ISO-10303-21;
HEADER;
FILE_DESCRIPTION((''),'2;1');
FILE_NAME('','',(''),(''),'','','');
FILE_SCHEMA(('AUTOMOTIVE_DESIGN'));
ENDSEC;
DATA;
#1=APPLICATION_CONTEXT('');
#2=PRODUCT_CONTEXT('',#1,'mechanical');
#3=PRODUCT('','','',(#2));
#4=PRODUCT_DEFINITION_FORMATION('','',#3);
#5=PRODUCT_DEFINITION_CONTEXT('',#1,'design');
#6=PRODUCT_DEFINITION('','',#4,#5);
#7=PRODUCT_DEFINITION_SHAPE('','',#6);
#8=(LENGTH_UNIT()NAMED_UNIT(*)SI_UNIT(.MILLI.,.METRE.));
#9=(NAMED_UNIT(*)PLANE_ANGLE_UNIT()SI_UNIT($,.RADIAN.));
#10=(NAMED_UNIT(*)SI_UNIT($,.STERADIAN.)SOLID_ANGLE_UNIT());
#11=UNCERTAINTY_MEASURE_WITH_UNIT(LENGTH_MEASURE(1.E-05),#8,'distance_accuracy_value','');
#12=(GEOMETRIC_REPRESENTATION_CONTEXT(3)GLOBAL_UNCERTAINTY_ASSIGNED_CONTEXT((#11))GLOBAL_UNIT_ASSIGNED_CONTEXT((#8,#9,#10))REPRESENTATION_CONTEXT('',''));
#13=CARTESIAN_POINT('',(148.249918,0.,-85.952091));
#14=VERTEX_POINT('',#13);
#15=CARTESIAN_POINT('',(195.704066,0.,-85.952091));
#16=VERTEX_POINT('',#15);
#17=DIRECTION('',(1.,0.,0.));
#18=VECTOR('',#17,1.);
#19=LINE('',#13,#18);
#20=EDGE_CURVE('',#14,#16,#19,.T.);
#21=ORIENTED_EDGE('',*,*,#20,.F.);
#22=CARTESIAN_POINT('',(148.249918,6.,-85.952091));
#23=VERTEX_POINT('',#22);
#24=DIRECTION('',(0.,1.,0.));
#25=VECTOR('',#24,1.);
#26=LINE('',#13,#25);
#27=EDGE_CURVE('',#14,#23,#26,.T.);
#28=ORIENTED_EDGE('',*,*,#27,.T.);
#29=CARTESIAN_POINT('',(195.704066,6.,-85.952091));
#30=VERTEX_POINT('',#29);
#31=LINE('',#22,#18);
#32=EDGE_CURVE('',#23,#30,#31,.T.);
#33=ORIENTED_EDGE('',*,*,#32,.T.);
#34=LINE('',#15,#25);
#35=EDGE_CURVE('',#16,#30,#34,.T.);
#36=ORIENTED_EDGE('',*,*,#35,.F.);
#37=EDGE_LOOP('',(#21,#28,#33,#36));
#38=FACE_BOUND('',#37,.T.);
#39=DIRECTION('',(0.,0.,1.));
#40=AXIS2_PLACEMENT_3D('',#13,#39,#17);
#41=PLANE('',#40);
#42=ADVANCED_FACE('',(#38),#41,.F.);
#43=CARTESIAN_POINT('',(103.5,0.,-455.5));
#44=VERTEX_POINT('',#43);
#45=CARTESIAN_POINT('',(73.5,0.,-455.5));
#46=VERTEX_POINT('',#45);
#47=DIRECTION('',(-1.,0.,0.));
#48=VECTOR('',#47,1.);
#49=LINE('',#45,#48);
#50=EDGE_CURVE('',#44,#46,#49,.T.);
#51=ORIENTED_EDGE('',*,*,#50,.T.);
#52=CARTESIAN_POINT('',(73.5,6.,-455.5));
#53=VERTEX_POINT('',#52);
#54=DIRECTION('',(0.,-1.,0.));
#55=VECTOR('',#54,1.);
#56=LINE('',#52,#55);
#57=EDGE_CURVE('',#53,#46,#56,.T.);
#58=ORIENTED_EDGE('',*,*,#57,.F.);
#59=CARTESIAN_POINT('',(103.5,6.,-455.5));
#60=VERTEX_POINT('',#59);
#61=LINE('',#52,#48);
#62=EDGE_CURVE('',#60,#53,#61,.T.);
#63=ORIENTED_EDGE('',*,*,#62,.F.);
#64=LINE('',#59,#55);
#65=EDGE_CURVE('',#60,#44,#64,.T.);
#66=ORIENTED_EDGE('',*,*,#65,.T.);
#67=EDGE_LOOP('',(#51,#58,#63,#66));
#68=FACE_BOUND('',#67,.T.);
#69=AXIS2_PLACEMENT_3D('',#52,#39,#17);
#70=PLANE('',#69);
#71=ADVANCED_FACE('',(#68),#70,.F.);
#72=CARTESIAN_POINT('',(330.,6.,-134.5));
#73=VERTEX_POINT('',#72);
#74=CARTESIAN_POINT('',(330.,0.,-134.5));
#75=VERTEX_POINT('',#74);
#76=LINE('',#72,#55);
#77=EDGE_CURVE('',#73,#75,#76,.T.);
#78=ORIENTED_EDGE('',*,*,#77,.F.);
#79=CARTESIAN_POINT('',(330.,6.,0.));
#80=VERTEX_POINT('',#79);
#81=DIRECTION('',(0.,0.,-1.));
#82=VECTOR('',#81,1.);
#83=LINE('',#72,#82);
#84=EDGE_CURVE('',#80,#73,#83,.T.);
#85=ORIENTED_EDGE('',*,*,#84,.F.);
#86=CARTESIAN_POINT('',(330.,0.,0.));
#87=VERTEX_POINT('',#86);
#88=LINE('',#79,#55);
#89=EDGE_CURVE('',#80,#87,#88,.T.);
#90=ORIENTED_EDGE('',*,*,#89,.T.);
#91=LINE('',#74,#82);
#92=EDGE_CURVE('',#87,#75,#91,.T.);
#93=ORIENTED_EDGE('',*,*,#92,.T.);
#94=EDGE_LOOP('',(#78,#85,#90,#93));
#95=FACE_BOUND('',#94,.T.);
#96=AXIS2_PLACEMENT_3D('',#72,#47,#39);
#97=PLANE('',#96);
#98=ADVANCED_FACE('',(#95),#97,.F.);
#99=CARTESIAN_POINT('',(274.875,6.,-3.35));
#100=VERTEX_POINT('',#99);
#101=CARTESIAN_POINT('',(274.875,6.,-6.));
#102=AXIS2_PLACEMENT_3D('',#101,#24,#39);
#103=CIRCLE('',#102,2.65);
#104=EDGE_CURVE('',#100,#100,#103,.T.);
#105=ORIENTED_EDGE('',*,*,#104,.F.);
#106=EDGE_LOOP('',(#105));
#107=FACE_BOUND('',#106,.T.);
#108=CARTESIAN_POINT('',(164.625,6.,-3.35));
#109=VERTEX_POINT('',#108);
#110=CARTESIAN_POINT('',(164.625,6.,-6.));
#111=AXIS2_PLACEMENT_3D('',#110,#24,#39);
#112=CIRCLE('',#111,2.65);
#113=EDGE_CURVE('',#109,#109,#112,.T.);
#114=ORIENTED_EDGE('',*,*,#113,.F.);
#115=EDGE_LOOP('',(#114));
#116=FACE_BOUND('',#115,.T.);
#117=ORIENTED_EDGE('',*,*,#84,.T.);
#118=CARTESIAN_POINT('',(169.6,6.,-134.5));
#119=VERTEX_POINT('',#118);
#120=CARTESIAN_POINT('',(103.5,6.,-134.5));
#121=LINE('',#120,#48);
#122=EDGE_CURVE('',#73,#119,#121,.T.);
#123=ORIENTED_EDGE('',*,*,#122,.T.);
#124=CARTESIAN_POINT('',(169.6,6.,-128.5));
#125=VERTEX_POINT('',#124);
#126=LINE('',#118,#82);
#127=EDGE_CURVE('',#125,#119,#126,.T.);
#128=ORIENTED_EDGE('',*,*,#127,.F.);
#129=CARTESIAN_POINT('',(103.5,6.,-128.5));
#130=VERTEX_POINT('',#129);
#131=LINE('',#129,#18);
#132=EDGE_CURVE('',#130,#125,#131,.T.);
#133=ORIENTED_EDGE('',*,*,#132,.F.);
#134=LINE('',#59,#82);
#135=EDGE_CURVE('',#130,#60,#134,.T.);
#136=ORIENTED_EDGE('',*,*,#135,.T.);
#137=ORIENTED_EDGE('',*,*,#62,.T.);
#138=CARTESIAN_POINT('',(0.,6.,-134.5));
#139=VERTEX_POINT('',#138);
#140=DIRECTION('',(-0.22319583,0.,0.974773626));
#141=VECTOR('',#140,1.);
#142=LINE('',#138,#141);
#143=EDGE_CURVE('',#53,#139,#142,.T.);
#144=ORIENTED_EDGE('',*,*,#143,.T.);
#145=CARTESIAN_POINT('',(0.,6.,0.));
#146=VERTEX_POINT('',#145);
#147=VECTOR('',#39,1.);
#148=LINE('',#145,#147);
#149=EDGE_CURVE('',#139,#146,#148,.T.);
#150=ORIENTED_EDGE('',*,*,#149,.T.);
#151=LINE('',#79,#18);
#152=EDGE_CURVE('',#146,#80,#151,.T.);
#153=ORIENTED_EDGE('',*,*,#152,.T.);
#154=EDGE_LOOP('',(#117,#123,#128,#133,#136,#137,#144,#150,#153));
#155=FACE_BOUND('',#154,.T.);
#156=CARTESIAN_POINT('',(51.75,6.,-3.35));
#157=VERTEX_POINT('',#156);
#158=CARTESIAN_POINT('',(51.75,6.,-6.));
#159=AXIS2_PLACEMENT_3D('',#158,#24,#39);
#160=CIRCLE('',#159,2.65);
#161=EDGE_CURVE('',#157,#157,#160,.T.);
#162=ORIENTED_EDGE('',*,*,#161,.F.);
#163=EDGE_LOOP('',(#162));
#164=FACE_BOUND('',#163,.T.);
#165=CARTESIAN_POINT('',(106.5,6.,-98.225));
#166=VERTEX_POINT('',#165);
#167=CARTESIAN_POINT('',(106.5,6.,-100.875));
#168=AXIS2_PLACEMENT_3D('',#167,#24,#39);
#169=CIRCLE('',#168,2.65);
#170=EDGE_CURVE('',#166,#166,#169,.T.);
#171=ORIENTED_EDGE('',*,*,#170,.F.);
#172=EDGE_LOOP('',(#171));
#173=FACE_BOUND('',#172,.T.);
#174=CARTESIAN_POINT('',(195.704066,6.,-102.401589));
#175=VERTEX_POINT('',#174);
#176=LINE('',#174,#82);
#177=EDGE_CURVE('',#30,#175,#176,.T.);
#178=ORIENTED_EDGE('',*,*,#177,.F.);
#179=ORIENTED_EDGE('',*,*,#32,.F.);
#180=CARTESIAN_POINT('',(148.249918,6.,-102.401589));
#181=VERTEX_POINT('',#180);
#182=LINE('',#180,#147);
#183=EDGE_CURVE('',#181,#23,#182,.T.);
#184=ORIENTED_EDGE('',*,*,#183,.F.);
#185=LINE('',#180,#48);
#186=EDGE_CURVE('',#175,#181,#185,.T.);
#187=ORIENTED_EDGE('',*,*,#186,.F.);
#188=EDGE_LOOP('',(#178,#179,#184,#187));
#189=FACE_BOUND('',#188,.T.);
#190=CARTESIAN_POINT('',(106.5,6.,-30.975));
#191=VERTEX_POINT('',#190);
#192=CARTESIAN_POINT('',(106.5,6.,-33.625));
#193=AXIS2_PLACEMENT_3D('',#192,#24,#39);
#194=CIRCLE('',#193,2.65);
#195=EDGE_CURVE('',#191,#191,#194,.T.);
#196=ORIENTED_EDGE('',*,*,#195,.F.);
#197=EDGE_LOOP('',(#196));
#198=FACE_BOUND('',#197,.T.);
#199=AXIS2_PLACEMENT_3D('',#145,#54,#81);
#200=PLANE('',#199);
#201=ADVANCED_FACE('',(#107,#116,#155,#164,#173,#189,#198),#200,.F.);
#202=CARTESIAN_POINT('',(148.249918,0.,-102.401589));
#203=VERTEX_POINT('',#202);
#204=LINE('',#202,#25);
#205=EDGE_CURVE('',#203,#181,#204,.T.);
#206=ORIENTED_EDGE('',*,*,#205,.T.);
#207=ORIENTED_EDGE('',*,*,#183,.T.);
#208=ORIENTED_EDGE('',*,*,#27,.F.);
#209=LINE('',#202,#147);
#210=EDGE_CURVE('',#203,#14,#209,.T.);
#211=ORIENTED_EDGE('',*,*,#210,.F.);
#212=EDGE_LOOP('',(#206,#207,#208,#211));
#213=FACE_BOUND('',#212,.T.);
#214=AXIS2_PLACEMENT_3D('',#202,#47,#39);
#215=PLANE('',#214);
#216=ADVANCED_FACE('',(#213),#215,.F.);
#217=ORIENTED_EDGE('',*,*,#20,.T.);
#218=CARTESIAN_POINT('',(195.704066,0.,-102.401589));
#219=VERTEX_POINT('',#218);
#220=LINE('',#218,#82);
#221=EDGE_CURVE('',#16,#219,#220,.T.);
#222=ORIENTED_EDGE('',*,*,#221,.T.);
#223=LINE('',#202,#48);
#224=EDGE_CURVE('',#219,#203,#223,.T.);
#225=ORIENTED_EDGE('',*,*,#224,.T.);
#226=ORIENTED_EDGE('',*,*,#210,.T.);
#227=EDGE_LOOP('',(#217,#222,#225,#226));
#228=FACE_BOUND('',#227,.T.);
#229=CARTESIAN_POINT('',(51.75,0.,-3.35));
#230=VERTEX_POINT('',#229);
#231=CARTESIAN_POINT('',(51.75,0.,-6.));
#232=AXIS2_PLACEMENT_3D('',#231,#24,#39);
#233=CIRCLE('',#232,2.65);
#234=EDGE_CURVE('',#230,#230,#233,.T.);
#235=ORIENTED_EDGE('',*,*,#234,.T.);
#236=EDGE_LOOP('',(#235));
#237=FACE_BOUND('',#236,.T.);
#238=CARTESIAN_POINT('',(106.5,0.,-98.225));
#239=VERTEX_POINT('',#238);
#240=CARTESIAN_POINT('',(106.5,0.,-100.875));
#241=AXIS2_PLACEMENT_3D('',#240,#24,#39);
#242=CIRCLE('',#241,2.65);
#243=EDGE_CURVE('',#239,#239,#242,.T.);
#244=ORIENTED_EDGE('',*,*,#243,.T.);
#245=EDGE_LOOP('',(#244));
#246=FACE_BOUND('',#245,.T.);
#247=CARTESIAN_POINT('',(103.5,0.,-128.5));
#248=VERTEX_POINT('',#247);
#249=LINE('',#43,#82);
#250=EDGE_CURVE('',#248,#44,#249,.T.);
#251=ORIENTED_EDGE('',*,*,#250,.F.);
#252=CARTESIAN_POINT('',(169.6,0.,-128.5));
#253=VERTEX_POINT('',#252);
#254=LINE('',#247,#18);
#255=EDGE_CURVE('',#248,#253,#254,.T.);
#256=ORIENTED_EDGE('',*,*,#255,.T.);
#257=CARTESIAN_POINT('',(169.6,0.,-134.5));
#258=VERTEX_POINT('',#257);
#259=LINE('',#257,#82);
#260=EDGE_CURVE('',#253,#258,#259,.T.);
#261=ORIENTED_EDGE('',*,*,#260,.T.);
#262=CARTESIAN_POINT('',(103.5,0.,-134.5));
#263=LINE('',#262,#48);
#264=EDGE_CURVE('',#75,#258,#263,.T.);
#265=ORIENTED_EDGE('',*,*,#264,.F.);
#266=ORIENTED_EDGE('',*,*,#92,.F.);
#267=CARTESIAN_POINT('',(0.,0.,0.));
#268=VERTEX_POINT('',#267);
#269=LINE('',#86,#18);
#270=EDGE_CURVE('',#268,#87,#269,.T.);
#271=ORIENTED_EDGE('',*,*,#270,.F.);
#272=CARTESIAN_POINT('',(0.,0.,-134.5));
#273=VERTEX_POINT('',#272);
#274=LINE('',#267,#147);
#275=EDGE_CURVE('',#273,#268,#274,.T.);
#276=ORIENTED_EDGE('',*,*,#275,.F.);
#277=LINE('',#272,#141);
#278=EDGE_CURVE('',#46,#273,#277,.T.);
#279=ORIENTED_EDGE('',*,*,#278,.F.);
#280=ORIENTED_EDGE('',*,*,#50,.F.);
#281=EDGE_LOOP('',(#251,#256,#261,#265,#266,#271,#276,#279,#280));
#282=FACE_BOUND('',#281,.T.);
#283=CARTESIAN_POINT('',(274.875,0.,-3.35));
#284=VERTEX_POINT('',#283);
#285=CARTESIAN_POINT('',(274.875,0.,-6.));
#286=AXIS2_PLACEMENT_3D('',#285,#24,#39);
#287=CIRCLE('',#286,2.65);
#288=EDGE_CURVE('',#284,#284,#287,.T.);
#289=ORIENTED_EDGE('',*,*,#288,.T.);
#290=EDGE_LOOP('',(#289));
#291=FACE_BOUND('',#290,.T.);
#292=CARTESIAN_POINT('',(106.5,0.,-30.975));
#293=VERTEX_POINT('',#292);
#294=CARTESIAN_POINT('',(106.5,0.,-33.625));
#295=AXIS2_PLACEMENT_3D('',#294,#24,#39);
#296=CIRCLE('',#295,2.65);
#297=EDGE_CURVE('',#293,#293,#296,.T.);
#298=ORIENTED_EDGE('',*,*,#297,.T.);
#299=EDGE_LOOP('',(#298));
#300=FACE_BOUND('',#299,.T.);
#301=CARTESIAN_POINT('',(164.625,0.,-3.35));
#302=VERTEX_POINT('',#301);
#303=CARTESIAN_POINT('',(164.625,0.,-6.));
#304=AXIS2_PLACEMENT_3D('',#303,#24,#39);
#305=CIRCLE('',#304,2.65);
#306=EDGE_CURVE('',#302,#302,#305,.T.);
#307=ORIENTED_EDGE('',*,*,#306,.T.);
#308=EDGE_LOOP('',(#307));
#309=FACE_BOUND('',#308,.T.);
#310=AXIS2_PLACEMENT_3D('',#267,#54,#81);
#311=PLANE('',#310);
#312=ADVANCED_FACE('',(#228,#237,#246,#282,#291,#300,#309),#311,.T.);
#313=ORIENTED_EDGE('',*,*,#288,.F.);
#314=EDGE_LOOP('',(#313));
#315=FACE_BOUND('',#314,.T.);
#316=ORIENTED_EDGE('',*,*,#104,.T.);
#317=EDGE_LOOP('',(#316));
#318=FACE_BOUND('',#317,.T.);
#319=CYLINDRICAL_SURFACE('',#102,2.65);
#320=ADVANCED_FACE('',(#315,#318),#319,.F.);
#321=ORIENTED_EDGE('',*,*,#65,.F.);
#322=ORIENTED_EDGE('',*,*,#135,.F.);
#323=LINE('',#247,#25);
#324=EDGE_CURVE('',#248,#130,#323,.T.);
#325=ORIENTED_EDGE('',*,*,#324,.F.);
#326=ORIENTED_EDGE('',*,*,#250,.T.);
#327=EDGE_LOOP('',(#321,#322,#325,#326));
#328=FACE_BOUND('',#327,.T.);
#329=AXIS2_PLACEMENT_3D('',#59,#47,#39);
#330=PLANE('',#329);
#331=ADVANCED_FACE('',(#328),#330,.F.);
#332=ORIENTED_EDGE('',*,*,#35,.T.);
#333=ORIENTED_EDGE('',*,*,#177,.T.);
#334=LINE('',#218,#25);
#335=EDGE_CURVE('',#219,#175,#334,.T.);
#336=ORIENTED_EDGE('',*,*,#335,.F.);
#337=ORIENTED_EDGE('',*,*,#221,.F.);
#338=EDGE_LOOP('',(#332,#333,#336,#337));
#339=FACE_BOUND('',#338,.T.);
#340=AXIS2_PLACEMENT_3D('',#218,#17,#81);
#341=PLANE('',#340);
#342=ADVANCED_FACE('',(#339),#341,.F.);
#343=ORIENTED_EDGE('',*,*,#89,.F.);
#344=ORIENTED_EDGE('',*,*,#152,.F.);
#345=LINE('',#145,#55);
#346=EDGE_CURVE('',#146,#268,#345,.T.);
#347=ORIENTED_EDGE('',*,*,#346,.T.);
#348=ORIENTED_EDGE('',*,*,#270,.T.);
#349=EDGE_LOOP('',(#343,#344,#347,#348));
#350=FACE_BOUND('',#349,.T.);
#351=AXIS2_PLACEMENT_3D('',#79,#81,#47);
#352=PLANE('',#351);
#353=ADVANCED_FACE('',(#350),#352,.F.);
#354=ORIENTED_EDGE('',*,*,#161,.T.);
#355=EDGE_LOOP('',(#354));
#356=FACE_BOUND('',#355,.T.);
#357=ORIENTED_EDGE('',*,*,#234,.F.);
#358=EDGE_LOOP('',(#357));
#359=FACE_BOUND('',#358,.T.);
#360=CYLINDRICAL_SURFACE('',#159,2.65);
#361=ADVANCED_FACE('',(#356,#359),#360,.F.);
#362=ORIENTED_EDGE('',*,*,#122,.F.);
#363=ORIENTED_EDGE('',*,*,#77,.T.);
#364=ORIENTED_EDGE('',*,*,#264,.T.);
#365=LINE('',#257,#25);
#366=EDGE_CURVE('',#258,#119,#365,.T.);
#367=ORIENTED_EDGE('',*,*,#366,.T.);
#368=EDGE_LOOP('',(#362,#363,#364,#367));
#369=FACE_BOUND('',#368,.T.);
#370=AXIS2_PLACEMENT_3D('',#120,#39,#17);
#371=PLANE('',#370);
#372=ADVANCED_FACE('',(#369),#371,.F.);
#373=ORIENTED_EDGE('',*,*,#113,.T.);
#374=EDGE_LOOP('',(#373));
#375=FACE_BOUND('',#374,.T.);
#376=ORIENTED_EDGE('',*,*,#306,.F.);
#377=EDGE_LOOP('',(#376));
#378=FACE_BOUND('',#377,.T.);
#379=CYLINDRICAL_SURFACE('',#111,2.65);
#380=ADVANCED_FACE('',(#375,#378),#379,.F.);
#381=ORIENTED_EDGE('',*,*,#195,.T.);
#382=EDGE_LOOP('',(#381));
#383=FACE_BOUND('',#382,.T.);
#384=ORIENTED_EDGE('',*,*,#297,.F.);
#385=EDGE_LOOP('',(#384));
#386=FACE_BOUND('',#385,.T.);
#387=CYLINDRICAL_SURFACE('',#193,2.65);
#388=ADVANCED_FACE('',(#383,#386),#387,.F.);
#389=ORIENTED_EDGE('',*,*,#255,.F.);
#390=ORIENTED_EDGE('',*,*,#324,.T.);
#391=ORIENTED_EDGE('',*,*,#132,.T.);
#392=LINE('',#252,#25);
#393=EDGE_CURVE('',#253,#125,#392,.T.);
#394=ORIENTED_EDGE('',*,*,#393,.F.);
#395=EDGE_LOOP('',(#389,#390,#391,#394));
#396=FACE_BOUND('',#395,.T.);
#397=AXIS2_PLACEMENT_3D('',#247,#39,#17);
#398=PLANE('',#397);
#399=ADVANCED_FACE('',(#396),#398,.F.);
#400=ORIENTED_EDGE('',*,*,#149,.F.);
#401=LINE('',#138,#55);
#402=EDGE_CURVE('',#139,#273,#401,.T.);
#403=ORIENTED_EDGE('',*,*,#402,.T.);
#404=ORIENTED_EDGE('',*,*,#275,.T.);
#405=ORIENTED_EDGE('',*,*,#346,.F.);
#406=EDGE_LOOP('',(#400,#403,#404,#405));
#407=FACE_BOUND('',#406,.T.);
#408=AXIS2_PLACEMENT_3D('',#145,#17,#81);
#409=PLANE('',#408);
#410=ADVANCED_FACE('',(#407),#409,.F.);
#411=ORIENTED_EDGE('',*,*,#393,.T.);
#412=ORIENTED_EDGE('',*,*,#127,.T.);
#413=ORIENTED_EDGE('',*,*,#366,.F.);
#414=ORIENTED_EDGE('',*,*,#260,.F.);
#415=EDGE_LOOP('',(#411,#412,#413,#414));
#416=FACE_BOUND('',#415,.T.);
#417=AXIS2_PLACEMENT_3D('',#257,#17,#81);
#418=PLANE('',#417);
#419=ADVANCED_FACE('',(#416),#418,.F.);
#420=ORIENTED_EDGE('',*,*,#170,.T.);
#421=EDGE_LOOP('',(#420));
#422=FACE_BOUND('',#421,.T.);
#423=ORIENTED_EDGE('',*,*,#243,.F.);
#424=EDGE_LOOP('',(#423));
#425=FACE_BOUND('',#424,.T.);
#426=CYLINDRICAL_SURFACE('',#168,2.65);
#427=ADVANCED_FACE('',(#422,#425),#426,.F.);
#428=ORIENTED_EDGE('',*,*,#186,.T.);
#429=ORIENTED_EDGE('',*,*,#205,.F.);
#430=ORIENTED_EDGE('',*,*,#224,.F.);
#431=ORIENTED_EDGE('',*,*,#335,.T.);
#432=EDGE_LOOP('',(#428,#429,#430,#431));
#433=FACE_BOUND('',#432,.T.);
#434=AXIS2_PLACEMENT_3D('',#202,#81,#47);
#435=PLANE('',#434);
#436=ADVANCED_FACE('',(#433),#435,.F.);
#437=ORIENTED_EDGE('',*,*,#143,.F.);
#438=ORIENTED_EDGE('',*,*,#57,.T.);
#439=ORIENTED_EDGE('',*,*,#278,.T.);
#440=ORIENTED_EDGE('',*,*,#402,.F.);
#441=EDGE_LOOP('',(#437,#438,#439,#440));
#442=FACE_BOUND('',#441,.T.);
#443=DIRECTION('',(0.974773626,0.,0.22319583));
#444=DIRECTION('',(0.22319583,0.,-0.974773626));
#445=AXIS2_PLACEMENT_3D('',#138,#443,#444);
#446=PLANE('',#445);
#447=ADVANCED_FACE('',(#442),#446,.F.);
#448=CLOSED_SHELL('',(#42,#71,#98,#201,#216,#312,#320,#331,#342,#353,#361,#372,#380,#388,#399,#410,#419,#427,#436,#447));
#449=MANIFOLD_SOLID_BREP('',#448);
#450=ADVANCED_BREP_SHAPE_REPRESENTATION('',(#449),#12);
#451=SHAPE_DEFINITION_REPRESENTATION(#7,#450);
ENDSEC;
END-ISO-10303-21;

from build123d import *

# Parameters (mm, degrees)
LEG_OUTLINE_R = 2.65
LEG_OUTLINE_W = 47.454147397
LEG_OUTLINE_H = 16.449498304
LEG_DEPTH     = 6


# Read off the part's stored shape, not the designer's step: leg
with BuildPart() as part:
    # leg outline → leg (new body)
    with BuildSketch(Plane(origin=(0, 0, 0), x_dir=(1, 0, 0), z_dir=(0, 1, 0))):
        Polygon((0, 0), (330, 0), (330, 134.5), (169.6, 134.5), (169.6, 128.5), (103.5, 128.5), (103.5, 455.5), (73.5, 455.5), (0, 134.5), align=None)
        with Locations((51.75, 6)):
            Circle(LEG_OUTLINE_R, mode=Mode.SUBTRACT)
        with Locations((106.5, 33.625)):
            Circle(LEG_OUTLINE_R, mode=Mode.SUBTRACT)
        with Locations((164.625, 6)):
            Circle(LEG_OUTLINE_R, mode=Mode.SUBTRACT)
        with Locations((106.5, 100.875)):
            Circle(LEG_OUTLINE_R, mode=Mode.SUBTRACT)
        with Locations((171.976991955, 94.176840096)):
            Rectangle(LEG_OUTLINE_W, LEG_OUTLINE_H, mode=Mode.SUBTRACT)
        with Locations((274.875, 6)):
            Circle(LEG_OUTLINE_R, mode=Mode.SUBTRACT)
    extrude(amount=LEG_DEPTH)


solid = part.part
